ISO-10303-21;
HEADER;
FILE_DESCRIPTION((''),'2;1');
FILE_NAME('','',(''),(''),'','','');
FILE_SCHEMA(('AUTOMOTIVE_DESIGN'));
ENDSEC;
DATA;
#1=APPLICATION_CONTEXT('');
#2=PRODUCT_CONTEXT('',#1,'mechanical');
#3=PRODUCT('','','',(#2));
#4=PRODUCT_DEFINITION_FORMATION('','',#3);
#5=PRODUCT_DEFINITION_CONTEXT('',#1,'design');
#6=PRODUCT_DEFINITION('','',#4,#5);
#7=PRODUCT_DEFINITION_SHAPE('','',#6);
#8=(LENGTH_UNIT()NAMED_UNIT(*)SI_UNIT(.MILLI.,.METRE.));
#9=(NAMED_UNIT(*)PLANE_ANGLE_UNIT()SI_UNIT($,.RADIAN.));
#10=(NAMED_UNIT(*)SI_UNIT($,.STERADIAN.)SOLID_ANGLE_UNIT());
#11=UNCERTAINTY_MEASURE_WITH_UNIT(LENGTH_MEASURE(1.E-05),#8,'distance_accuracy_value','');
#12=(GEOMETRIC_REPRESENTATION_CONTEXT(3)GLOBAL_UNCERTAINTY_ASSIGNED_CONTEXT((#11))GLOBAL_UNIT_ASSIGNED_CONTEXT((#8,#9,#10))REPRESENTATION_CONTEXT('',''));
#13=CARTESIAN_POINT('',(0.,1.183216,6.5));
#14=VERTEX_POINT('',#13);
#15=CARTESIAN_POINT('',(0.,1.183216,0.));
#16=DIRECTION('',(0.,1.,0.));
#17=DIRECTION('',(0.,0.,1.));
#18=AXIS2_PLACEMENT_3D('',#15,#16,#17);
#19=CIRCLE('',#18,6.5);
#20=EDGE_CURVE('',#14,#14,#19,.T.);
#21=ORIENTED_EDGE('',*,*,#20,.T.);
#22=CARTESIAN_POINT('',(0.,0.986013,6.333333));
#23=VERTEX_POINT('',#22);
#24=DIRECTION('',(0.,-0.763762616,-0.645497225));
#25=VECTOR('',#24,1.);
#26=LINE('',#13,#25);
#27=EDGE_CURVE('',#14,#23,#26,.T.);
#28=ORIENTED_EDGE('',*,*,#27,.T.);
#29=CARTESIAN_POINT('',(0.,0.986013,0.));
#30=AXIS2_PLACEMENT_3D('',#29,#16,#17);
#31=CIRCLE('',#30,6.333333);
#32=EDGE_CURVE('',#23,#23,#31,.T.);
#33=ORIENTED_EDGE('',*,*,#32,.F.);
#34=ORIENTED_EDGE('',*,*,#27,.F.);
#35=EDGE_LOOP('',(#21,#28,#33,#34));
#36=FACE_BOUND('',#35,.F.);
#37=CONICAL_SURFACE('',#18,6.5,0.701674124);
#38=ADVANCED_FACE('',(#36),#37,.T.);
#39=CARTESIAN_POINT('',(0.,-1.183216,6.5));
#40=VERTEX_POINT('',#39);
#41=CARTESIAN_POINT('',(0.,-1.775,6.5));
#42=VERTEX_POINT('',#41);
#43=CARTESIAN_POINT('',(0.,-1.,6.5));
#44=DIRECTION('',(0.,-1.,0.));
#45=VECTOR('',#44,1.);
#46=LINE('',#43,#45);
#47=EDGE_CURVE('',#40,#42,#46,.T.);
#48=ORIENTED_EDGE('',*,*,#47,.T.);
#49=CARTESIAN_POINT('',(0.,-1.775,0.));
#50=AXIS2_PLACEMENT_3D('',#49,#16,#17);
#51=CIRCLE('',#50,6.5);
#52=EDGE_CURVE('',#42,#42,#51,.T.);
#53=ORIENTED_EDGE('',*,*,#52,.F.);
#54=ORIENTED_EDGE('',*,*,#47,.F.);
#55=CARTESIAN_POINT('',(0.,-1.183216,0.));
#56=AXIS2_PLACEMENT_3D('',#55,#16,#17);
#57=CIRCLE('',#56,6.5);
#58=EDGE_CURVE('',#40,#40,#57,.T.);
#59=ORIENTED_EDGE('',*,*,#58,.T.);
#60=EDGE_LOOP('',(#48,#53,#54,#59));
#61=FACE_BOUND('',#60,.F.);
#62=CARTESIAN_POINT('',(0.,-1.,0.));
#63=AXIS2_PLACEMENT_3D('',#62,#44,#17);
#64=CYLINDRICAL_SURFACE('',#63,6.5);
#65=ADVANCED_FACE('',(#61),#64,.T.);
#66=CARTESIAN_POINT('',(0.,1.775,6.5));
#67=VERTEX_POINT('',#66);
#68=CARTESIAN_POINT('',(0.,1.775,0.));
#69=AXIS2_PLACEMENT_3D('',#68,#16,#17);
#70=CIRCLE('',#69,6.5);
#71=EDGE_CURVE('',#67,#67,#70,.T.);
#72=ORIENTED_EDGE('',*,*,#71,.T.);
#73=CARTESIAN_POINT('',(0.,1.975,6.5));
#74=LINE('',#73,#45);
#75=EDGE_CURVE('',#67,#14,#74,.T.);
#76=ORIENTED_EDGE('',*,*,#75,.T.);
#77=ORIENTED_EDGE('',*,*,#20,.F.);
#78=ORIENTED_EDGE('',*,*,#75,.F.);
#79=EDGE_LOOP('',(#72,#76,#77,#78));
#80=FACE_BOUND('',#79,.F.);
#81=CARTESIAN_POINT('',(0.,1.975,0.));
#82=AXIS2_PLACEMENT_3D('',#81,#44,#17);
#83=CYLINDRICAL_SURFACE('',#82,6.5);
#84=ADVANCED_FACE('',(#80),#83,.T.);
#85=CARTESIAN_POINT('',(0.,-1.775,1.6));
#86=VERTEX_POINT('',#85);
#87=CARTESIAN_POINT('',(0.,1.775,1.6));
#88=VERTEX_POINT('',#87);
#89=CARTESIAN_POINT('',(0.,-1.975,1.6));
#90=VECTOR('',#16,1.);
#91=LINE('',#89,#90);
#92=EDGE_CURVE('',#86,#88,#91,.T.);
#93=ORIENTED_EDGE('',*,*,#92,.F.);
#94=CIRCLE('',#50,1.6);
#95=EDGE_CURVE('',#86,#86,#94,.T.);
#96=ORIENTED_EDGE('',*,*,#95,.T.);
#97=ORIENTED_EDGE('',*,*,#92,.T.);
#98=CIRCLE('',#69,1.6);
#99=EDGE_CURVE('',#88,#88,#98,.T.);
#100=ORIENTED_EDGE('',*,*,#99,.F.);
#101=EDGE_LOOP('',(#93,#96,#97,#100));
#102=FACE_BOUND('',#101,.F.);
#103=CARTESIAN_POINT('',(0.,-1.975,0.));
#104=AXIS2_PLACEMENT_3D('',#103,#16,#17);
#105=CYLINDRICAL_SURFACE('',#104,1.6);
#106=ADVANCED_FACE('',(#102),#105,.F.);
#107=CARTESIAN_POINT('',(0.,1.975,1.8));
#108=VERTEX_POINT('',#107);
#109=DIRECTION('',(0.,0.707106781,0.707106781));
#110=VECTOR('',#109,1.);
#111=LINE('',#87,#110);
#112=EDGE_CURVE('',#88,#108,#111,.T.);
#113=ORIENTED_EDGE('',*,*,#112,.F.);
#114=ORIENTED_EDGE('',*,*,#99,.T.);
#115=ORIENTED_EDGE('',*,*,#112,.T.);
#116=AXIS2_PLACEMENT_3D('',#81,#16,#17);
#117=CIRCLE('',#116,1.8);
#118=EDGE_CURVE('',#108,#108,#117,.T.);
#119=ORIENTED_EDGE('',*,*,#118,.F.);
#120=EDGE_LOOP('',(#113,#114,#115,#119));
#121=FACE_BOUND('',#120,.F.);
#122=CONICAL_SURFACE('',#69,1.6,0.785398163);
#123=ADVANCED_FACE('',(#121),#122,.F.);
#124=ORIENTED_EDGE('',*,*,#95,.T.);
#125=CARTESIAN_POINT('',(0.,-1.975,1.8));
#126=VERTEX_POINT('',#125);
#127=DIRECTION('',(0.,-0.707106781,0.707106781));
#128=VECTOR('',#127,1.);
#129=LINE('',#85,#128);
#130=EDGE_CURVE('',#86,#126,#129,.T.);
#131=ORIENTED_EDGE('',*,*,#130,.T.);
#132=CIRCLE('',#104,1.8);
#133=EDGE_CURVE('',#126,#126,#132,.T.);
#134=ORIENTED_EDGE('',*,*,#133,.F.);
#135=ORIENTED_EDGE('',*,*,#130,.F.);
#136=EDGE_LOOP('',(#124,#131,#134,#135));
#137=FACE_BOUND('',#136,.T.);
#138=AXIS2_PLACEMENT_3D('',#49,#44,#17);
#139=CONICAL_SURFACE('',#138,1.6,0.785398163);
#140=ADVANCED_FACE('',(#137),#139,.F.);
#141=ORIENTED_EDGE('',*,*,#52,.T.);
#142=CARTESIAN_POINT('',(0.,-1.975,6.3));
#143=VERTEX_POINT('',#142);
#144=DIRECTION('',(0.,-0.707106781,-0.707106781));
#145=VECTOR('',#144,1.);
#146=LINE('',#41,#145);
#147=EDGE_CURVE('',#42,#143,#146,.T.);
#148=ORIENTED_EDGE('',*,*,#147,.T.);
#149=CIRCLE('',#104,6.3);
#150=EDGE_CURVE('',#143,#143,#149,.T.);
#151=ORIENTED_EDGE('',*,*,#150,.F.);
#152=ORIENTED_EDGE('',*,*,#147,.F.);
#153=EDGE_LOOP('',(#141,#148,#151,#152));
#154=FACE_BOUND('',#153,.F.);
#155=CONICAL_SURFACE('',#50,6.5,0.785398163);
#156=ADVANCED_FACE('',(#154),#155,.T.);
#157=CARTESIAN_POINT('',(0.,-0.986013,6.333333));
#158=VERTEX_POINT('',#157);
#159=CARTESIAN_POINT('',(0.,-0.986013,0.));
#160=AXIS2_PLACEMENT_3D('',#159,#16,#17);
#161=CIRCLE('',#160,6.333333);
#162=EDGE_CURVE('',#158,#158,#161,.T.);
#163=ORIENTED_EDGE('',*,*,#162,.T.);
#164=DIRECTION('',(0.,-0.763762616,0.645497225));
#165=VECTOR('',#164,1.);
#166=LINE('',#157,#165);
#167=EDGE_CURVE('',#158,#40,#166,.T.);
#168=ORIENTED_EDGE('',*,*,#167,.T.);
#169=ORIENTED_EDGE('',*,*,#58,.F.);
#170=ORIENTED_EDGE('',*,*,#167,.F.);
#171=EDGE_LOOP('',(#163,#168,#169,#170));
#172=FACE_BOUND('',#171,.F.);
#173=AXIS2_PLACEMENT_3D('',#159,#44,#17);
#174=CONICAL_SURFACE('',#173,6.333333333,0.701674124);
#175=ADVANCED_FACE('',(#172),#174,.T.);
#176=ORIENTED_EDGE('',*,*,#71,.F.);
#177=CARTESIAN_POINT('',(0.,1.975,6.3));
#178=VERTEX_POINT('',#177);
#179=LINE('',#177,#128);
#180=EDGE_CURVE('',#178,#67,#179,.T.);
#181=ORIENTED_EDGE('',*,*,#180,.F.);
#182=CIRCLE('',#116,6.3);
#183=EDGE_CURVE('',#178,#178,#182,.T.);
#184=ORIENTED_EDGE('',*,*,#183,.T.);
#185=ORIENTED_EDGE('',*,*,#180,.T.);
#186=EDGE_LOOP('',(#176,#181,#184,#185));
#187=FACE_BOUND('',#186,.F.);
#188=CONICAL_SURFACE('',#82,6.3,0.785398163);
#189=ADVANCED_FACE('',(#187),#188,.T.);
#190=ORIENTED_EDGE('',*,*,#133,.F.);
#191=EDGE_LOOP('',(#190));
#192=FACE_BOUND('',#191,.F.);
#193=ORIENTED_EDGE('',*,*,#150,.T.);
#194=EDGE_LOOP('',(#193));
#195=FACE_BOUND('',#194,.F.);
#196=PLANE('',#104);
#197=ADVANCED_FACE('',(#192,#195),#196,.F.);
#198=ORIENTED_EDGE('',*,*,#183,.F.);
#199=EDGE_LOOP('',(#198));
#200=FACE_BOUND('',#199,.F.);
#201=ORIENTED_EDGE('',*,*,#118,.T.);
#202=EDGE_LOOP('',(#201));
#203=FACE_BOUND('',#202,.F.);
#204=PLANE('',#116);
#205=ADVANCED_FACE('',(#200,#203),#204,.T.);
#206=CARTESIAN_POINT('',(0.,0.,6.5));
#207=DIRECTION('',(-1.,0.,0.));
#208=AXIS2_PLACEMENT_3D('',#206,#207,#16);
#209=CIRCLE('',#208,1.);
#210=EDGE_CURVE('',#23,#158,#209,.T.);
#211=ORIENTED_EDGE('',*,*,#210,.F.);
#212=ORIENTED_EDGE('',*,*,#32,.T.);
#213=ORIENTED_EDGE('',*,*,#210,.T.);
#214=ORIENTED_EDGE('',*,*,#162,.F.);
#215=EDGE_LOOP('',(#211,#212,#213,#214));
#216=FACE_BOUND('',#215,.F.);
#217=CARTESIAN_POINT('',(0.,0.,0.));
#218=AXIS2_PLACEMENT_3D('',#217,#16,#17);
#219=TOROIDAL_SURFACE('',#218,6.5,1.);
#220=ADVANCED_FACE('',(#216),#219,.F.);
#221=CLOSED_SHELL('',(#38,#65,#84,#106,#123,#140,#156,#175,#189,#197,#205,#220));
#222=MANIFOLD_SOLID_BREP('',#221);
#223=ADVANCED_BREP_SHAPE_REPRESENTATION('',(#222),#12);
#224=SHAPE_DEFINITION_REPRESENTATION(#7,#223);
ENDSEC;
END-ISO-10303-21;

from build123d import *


# Not quite as in the source:
# - a fillet or chamfer that OpenCascade refuses, or shapes differently, is made with other operations: its cross-section is extruded or revolved along the edge and cut away or added


with BuildPart() as f1:
    # F0 (on Right) → F1 (revolve)
    with BuildSketch(Plane.YZ):
        with BuildLine():
            Line((-1.975, 1.6), (0, 1.6))
            Line((0, 1.6), (1.975, 1.6))
            Line((1.975, 1.6), (1.975, 6.5))
            Line((1.975, 6.5), (1, 6.5))
            ThreePointArc((1, 6.5), (0, 5.5), (-1, 6.5))
            Line((-1, 6.5), (-1.975, 6.5))
            Line((-1.975, 6.5), (-1.975, 1.6))
        make_face()
    revolve(axis=Axis((0, 2.5333669037, 0), (0, 1, 0)))

    # F2: chamfer of 0.2 on 9 edges, made by hand

    # F2_s1 → F2_t2 (revolve, cut)
    with BuildSketch(Plane.YZ):
        Polygon((-1.775, 1.6), (-1.975, 1.8), (-1.975, 1.6), align=None)
    revolve(axis=Axis((0, -1.975, 0), (0, 1, 0)), mode=Mode.SUBTRACT)

    # F2_s3 → F2_t4 (revolve, cut)
    with BuildSketch(Plane.YZ):
        Polygon((1.775, 1.6), (1.975, 1.8), (1.975, 1.6), align=None)
    revolve(axis=Axis((0, 1.975, 0), (0, 1, 0)), mode=Mode.SUBTRACT)

    # F2_s5 → F2_t6 (revolve, cut)
    with BuildSketch(Plane.YZ):
        with BuildLine():
            Line((-0.9860132972, 6.3333333333), (-1.1832159566, 6.5))
            Line((-1.1832159566, 6.5), (-1, 6.5))
            ThreePointArc((-1, 6.5), (-0.9962551156, 6.4135376119), (-0.9860132972, 6.3333333333))
        make_face()
    revolve(axis=Axis((0, -1, 0), (0, 1, 0)), mode=Mode.SUBTRACT)

    # F2_s7 → F2_t8 (revolve, cut)
    with BuildSketch(Plane.YZ):
        Polygon((-1.775, 6.5), (-1.975, 6.3), (-1.975, 6.5), align=None)
    revolve(axis=Axis((0, -1.975, 0), (0, 1, 0)), mode=Mode.SUBTRACT)

    # F2_s9 → F2_t10 (revolve, cut)
    with BuildSketch(Plane.YZ):
        Polygon((1.975, 6.3), (1.775, 6.5), (1.975, 6.5), align=None)
    revolve(axis=Axis((0, 1.975, 0), (0, 1, 0)), mode=Mode.SUBTRACT)

    # F2_s11 → F2_t12 (revolve, cut)
    with BuildSketch(Plane.YZ):
        with BuildLine():
            Line((1.1832159566, 6.5), (0.9860132972, 6.3333333333))
            ThreePointArc((0.9860132972, 6.3333333333), (0.9962551156, 6.4135376119), (1, 6.5))
            Line((1, 6.5), (1.1832159566, 6.5))
        make_face()
    revolve(axis=Axis((0, 1, 0), (0, 1, 0)), mode=Mode.SUBTRACT)


solid = f1.part
